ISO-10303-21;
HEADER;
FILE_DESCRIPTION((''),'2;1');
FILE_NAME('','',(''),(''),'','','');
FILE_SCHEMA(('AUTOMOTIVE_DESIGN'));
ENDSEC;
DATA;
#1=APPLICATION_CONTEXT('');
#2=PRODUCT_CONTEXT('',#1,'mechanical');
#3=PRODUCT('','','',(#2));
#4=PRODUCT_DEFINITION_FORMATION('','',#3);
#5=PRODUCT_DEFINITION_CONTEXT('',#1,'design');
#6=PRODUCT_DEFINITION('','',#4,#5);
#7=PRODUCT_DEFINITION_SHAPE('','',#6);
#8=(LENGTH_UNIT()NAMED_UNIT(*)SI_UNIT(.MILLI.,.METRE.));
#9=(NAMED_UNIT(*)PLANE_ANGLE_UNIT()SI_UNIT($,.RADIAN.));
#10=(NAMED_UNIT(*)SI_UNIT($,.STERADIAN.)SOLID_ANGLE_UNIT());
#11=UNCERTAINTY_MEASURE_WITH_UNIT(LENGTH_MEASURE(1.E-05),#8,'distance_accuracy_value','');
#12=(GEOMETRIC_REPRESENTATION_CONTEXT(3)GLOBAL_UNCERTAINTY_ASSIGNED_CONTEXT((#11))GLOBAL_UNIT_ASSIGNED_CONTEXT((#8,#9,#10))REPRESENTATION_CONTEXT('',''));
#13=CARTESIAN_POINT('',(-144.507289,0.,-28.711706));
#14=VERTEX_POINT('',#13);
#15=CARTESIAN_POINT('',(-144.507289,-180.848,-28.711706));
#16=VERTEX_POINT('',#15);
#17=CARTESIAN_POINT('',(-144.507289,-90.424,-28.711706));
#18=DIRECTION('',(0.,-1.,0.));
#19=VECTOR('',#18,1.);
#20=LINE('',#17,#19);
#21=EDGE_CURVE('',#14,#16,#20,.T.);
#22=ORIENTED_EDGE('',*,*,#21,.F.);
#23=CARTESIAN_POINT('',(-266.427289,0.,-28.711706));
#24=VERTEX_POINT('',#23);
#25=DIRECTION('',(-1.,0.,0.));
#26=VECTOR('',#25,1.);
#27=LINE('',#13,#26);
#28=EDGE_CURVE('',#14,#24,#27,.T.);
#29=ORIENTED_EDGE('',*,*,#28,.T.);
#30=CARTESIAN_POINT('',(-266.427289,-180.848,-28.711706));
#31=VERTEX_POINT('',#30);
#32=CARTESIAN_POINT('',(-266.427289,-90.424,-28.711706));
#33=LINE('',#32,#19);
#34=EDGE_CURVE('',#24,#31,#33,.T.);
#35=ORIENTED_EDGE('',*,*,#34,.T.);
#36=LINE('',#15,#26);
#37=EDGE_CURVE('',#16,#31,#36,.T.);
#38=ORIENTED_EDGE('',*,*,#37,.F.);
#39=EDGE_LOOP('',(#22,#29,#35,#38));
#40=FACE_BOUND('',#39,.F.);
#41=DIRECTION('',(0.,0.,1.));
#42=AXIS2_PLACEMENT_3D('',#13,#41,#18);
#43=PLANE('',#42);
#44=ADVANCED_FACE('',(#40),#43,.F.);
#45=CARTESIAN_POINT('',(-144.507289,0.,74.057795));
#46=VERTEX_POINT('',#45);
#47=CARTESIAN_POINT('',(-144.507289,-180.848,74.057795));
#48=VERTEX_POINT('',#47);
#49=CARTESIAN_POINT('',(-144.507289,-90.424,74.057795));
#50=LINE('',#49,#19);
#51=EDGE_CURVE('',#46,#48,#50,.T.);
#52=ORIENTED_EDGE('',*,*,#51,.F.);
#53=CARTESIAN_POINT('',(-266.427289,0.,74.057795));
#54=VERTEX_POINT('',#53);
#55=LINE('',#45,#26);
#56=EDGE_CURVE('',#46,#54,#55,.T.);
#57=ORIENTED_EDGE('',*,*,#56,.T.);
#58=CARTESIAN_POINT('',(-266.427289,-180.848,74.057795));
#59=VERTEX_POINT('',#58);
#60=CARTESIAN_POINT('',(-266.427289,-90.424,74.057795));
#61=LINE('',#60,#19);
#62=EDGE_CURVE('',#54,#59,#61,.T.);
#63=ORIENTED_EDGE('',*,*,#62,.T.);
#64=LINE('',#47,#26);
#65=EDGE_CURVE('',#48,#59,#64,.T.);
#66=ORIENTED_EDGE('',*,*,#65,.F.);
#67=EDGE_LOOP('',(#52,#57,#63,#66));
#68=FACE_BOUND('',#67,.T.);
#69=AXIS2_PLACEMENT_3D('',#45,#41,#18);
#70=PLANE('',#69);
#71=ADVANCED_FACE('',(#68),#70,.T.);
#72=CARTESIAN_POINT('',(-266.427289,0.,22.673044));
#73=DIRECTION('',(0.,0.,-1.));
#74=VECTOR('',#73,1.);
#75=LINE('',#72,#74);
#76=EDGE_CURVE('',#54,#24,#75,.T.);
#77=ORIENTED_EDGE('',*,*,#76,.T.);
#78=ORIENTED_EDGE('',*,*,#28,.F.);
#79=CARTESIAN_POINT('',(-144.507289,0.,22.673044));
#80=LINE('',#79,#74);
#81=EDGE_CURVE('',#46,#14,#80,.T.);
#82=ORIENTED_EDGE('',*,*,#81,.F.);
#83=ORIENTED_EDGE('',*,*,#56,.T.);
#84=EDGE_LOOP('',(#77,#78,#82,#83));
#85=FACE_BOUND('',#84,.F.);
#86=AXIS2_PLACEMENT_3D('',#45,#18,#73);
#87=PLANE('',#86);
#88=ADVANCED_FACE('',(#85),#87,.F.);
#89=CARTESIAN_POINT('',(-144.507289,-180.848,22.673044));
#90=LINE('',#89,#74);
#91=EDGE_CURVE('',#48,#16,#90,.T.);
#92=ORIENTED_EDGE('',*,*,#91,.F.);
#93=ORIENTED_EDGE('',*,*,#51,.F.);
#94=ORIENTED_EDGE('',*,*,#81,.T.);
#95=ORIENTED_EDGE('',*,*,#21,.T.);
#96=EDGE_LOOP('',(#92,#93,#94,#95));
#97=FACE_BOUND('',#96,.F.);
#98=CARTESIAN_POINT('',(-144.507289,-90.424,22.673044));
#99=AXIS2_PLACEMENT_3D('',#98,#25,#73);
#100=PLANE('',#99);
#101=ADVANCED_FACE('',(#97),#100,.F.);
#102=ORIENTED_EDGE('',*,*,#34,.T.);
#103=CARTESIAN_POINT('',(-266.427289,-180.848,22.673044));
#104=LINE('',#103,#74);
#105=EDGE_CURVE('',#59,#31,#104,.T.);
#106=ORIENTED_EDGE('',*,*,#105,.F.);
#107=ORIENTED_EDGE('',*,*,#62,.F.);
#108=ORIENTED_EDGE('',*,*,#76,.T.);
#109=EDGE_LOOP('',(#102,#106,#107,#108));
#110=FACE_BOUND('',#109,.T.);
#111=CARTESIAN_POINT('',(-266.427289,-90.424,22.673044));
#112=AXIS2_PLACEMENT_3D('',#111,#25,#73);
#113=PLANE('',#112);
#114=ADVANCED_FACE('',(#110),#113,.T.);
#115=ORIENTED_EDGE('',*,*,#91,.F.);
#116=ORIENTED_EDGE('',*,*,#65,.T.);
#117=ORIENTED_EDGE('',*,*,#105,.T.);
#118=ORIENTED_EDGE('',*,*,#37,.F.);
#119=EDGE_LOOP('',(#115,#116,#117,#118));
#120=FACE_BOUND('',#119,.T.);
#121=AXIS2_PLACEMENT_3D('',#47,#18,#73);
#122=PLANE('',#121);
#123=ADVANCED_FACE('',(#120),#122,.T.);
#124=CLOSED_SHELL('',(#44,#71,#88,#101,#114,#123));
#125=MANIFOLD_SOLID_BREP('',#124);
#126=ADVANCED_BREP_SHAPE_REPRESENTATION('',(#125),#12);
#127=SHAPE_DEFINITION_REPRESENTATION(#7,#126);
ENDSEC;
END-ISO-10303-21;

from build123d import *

# Parameters (mm, degrees)
F1_E0_W  = 102.7695015073
F1_E0_H  = 180.848
F2_DEPTH = 121.92


with BuildPart() as f2:
    # F1_E0 (on explicit) → F2 (new body)
    with BuildSketch(Plane(origin=(-144.5072889328, 0, 74.0577951074), x_dir=(0, 0, -1), z_dir=(-1, 0, 0))):
        with Locations((51.3847507536, 90.424)):
            Rectangle(F1_E0_W, F1_E0_H)
    extrude(amount=F2_DEPTH)


solid = f2.part
